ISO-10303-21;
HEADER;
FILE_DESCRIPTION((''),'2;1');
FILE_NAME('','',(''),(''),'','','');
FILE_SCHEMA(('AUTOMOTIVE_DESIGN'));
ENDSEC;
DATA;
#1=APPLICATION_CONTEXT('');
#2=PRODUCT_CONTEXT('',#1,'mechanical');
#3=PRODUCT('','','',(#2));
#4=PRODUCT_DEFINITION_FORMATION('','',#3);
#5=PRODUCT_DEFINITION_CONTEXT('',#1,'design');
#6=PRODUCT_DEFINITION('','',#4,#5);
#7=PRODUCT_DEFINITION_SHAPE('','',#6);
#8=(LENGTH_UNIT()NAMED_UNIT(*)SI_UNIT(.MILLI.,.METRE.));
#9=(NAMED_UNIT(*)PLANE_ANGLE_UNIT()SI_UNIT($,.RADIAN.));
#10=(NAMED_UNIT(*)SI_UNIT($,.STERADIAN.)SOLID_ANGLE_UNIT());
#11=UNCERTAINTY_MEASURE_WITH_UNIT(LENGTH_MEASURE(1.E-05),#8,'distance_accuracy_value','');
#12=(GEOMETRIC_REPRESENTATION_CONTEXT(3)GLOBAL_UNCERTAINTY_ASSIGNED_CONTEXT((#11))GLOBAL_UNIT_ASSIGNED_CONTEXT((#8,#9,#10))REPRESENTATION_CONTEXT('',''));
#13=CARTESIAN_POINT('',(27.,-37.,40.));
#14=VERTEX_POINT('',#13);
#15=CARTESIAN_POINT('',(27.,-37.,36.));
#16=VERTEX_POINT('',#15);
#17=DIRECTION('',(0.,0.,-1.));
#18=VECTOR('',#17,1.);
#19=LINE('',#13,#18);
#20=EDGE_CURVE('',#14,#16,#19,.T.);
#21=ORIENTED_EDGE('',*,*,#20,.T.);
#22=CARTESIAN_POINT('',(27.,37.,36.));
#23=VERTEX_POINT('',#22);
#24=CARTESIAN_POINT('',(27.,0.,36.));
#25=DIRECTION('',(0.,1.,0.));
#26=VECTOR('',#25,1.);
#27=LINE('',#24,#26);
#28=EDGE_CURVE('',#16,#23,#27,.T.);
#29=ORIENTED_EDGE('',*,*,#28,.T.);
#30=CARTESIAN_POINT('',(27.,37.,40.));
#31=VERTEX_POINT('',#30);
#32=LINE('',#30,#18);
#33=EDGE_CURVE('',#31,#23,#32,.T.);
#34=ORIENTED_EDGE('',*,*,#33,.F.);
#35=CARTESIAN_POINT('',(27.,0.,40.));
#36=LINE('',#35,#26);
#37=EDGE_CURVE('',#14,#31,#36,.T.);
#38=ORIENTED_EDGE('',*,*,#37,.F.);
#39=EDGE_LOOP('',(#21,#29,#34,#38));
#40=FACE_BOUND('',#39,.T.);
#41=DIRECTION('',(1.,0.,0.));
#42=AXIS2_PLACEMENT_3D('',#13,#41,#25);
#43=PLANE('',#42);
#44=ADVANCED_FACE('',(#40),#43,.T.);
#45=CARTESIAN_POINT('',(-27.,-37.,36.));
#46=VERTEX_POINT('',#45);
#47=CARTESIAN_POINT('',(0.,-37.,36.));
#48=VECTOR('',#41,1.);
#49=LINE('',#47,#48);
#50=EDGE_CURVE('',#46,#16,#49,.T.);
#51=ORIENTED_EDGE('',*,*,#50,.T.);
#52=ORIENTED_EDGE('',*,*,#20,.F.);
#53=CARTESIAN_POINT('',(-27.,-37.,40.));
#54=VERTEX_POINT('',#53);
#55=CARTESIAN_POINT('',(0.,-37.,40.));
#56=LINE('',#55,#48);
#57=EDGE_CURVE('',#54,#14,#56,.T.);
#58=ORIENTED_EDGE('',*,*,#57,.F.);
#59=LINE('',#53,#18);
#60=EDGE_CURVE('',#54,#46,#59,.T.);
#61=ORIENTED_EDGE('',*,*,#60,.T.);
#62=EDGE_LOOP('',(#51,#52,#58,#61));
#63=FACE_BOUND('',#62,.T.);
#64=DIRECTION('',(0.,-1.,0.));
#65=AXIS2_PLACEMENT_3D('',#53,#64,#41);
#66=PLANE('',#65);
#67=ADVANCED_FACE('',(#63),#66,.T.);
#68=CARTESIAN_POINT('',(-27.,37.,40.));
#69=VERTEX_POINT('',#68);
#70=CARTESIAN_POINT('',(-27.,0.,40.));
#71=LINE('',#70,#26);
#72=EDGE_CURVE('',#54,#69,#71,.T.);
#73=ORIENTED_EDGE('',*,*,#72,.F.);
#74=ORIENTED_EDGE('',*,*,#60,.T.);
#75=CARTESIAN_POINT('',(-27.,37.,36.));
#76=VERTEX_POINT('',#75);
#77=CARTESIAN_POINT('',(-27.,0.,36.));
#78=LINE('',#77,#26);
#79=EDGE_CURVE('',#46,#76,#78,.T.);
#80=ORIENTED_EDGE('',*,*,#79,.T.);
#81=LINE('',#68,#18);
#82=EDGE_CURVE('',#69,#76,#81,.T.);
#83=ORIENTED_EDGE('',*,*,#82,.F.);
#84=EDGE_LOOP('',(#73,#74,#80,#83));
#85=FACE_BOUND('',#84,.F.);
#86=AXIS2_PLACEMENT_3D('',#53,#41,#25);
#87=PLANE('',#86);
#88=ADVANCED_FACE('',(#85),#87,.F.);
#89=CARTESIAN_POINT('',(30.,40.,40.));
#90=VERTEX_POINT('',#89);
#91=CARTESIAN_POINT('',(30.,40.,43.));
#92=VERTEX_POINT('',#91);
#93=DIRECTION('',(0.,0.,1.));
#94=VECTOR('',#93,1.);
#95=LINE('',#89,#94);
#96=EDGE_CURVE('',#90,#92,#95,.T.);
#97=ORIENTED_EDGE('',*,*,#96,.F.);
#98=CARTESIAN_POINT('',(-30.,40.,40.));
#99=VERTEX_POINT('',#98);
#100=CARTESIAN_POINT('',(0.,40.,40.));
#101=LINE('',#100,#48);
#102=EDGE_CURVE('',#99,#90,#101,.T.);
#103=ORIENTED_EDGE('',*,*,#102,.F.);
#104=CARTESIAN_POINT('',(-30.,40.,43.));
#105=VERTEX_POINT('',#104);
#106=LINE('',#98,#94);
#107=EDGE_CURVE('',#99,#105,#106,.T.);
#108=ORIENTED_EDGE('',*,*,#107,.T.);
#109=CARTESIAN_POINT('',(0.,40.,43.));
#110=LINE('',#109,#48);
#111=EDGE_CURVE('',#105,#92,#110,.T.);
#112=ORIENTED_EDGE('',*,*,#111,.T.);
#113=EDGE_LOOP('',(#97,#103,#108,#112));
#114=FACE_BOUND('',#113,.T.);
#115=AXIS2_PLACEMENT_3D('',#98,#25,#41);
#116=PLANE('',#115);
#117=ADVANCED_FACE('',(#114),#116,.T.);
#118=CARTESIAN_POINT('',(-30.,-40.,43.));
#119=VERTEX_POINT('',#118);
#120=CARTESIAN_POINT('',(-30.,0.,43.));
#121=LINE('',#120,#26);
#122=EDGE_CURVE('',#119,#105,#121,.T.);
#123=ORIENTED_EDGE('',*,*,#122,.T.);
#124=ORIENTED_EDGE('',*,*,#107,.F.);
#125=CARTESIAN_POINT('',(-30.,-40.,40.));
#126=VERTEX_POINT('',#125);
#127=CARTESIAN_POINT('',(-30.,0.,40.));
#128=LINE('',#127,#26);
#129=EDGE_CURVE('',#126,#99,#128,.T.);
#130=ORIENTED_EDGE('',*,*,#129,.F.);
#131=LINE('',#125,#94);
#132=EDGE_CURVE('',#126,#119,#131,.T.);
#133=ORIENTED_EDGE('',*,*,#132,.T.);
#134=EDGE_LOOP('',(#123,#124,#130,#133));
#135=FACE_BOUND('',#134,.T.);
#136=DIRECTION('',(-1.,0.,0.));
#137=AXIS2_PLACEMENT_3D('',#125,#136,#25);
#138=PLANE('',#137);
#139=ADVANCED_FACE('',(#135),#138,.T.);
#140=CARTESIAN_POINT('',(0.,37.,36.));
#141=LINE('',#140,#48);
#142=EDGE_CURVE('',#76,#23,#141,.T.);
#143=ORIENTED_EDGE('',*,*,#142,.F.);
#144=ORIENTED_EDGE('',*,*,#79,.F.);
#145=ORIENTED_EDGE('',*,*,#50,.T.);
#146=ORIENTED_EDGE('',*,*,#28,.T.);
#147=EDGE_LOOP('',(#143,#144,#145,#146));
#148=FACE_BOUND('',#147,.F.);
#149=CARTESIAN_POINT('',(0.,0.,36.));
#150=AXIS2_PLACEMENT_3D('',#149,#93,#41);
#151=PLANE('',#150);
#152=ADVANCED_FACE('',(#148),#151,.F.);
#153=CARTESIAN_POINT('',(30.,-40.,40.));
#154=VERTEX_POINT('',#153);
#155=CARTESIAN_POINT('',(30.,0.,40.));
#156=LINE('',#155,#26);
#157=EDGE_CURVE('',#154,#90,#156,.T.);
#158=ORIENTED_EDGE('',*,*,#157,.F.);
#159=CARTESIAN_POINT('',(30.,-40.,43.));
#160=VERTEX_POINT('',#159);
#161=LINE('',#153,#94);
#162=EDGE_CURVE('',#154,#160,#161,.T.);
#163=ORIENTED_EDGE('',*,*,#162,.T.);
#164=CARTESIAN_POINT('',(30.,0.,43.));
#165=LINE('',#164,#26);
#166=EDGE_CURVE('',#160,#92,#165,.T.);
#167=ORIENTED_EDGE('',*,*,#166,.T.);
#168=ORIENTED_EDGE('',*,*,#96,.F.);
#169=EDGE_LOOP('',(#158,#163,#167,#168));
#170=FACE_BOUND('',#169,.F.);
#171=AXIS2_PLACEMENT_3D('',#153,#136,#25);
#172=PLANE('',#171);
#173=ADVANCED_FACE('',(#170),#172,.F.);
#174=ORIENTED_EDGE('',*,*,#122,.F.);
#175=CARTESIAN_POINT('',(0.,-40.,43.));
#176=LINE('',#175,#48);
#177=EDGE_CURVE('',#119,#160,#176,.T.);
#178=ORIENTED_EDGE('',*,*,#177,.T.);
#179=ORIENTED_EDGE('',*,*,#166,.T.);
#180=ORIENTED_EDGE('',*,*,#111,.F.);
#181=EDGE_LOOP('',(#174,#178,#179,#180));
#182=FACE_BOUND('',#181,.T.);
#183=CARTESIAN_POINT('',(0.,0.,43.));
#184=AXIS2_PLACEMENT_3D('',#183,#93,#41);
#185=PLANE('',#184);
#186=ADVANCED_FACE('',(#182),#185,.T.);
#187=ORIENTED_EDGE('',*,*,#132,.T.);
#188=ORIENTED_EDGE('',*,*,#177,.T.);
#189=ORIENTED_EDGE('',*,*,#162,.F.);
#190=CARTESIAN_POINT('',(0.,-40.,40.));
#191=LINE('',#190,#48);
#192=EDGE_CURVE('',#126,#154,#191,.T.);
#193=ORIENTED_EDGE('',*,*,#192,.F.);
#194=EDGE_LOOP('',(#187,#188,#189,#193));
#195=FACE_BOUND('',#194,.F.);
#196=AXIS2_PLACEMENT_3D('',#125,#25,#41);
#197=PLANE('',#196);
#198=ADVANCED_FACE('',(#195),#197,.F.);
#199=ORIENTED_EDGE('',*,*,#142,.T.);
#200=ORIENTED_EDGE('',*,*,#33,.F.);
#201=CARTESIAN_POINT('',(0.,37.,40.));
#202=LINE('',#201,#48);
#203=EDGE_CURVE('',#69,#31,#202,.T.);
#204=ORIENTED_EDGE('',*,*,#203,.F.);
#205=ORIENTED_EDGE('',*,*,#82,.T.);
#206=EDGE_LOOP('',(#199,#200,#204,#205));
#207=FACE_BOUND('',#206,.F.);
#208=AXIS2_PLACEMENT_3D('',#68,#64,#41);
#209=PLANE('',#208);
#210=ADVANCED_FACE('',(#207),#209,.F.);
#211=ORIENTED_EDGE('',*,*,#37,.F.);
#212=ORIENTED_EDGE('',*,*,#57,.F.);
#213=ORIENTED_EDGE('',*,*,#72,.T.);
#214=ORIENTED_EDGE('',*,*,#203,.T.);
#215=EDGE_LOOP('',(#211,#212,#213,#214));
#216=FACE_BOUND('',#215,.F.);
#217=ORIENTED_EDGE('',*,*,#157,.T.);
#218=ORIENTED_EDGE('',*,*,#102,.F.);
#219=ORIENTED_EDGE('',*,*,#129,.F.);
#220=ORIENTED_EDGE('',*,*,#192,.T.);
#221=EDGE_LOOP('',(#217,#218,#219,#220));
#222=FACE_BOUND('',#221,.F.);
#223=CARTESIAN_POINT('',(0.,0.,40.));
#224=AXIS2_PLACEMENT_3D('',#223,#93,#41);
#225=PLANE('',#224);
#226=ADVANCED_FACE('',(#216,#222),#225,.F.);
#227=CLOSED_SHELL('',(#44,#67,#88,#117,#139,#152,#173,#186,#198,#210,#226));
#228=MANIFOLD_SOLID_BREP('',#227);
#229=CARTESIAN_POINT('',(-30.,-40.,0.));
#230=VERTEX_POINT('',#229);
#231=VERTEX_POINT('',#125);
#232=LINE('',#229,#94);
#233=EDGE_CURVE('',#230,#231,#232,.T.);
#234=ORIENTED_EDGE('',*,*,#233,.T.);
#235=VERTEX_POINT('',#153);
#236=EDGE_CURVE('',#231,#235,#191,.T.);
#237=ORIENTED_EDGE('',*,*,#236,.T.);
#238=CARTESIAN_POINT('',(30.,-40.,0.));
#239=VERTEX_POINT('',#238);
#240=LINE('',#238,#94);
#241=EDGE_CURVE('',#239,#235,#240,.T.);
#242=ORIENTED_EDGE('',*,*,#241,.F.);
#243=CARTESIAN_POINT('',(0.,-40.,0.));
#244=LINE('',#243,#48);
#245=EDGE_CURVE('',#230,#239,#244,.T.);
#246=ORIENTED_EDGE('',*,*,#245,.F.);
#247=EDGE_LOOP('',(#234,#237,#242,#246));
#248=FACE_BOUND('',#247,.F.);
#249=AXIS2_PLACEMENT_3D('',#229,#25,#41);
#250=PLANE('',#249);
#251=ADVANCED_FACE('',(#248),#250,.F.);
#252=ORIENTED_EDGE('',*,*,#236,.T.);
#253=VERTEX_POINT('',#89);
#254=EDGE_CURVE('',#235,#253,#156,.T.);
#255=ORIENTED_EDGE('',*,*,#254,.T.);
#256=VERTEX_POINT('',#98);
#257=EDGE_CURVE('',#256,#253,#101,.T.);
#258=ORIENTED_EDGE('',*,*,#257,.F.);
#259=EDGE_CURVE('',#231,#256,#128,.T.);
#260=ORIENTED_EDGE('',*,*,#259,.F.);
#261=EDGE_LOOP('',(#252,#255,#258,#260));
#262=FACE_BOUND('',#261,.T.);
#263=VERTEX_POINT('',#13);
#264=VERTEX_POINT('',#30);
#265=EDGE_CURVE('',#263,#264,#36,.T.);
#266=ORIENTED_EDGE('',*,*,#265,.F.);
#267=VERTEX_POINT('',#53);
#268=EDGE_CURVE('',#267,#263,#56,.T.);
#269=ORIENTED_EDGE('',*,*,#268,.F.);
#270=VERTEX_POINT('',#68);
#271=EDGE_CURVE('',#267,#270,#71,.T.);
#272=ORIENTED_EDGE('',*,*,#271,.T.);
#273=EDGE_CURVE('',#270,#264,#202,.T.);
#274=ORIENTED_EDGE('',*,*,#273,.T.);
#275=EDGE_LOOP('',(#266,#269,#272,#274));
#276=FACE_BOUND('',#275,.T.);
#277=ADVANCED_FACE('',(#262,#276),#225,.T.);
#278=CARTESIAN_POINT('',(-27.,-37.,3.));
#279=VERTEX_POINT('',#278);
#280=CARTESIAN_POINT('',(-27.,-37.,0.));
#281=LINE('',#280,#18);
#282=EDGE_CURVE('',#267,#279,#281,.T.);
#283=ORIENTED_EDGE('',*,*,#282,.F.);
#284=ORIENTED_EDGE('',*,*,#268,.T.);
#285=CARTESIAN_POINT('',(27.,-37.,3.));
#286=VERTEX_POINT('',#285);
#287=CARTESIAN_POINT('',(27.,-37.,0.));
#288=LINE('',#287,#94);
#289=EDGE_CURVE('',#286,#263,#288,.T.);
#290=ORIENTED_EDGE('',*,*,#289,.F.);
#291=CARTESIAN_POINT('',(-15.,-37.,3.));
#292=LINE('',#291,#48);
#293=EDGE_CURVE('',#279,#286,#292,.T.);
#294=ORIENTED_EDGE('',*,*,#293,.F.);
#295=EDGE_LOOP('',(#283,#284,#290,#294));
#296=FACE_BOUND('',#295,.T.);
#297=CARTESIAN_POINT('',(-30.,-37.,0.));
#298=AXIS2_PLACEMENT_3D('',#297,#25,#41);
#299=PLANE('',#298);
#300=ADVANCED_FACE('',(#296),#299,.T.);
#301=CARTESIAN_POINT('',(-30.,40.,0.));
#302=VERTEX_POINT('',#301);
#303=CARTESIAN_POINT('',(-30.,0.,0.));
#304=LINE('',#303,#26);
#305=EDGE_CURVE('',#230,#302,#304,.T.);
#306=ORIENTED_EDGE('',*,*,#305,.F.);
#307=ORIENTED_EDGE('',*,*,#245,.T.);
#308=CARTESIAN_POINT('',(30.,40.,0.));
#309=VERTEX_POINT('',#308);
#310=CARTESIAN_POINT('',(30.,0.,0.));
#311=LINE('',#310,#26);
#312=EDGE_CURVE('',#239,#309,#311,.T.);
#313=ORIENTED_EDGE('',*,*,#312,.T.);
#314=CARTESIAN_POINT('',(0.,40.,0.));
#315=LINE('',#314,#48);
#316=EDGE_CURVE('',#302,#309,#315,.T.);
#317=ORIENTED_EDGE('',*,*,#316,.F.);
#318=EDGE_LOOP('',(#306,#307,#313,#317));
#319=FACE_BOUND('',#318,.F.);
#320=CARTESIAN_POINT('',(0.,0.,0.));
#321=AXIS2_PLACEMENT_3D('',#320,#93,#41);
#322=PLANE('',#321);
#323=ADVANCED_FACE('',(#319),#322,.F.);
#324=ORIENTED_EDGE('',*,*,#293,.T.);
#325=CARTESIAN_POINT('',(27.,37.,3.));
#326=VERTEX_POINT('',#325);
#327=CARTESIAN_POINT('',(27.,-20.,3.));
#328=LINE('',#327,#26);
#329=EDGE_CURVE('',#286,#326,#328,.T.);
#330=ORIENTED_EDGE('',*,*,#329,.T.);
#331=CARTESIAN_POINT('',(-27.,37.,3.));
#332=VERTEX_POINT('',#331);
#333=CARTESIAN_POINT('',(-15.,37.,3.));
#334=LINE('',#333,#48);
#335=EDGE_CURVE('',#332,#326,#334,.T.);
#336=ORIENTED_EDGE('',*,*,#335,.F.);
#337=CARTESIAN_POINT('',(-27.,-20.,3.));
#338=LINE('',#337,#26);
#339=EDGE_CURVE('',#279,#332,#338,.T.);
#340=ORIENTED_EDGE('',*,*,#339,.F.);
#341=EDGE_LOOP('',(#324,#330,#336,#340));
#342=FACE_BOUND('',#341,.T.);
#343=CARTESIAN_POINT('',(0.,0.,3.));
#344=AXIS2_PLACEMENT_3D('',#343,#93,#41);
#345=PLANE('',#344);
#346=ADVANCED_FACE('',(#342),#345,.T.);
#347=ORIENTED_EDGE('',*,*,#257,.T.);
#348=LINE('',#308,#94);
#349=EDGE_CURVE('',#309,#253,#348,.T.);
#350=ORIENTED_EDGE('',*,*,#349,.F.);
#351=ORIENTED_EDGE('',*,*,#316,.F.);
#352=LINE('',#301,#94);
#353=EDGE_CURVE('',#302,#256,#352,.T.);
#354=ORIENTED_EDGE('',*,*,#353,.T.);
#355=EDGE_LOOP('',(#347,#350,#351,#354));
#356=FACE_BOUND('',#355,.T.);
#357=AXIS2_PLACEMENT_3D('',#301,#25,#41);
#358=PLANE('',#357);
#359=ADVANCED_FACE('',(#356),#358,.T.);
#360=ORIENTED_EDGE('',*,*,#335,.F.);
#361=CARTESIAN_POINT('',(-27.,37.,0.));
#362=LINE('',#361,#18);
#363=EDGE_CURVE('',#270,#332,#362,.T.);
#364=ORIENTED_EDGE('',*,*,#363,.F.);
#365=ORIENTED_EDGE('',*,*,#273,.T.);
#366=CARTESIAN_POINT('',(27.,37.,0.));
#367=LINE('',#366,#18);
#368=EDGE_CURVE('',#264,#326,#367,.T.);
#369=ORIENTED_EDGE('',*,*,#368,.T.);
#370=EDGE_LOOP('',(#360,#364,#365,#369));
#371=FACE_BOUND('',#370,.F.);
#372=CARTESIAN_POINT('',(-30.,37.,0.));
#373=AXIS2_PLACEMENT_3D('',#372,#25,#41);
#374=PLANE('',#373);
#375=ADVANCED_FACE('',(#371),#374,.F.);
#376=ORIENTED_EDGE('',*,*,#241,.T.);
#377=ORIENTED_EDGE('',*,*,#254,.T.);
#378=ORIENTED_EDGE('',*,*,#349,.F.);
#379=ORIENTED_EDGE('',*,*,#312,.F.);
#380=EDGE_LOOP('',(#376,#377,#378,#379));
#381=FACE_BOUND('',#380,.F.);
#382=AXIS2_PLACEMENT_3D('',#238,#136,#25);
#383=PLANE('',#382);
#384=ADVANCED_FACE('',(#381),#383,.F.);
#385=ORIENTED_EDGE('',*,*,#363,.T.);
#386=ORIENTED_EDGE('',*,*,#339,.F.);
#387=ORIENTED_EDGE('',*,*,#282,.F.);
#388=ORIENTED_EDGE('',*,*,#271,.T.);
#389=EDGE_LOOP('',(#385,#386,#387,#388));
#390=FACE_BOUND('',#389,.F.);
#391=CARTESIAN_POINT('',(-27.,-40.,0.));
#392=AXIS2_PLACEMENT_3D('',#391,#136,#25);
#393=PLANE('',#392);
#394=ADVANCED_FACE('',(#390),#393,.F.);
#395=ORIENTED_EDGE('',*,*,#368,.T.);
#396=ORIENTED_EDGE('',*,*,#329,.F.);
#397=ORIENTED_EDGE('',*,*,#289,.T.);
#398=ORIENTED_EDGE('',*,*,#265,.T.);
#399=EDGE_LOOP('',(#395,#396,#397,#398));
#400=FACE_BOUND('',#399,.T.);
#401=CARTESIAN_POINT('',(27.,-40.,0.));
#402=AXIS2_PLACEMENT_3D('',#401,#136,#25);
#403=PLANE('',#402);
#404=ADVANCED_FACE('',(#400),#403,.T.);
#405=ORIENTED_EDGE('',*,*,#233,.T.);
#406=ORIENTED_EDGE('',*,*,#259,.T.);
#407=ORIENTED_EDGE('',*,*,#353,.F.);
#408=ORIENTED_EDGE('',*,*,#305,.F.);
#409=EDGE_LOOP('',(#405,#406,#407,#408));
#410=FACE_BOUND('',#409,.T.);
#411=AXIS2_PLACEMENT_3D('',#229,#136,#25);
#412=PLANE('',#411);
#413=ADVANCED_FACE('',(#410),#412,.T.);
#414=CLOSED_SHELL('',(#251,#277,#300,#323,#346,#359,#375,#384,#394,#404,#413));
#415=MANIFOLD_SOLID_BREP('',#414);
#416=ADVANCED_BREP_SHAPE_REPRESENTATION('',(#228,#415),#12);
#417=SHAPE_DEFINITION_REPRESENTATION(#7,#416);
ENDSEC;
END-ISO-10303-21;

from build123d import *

# Parameters (mm, degrees)
F0_W     = 60
F0_H     = 80
F1_DEPTH = 40
F2_T     = -3
F3_W     = 60
F3_H     = 80
F3_W_2   = 54
F3_H_2   = 74
F4_DEPTH = 3
F5_DEPTH = 4


with BuildPart() as f1:
    # F0 (on Top) → F1 (new body)
    with BuildSketch(Plane.XY):
        Rectangle(F0_W, F0_H)
    extrude(amount=F1_DEPTH)

    # F2
    f2_openings = [f1.faces().sort_by_distance(p)[0] for p in [
        (0, 0, 40),
    ]]
    offset(amount=F2_T, openings=f2_openings)


with BuildPart() as f4:
    # F3 (on face) → F4 (new body)
    with BuildSketch(Plane.XY.offset(40)):
        Rectangle(F3_W, F3_H)
        Rectangle(F3_W_2, F3_H_2, mode=Mode.SUBTRACT)
        Rectangle(F3_W_2, F3_H_2)
    extrude(amount=F4_DEPTH)

    # F3 (on face) → F5 (join)
    with BuildSketch(Plane.XY.offset(40)):
        Rectangle(F3_W_2, F3_H_2)
    extrude(amount=-F5_DEPTH)


solid = Compound([f1.part, f4.part])
